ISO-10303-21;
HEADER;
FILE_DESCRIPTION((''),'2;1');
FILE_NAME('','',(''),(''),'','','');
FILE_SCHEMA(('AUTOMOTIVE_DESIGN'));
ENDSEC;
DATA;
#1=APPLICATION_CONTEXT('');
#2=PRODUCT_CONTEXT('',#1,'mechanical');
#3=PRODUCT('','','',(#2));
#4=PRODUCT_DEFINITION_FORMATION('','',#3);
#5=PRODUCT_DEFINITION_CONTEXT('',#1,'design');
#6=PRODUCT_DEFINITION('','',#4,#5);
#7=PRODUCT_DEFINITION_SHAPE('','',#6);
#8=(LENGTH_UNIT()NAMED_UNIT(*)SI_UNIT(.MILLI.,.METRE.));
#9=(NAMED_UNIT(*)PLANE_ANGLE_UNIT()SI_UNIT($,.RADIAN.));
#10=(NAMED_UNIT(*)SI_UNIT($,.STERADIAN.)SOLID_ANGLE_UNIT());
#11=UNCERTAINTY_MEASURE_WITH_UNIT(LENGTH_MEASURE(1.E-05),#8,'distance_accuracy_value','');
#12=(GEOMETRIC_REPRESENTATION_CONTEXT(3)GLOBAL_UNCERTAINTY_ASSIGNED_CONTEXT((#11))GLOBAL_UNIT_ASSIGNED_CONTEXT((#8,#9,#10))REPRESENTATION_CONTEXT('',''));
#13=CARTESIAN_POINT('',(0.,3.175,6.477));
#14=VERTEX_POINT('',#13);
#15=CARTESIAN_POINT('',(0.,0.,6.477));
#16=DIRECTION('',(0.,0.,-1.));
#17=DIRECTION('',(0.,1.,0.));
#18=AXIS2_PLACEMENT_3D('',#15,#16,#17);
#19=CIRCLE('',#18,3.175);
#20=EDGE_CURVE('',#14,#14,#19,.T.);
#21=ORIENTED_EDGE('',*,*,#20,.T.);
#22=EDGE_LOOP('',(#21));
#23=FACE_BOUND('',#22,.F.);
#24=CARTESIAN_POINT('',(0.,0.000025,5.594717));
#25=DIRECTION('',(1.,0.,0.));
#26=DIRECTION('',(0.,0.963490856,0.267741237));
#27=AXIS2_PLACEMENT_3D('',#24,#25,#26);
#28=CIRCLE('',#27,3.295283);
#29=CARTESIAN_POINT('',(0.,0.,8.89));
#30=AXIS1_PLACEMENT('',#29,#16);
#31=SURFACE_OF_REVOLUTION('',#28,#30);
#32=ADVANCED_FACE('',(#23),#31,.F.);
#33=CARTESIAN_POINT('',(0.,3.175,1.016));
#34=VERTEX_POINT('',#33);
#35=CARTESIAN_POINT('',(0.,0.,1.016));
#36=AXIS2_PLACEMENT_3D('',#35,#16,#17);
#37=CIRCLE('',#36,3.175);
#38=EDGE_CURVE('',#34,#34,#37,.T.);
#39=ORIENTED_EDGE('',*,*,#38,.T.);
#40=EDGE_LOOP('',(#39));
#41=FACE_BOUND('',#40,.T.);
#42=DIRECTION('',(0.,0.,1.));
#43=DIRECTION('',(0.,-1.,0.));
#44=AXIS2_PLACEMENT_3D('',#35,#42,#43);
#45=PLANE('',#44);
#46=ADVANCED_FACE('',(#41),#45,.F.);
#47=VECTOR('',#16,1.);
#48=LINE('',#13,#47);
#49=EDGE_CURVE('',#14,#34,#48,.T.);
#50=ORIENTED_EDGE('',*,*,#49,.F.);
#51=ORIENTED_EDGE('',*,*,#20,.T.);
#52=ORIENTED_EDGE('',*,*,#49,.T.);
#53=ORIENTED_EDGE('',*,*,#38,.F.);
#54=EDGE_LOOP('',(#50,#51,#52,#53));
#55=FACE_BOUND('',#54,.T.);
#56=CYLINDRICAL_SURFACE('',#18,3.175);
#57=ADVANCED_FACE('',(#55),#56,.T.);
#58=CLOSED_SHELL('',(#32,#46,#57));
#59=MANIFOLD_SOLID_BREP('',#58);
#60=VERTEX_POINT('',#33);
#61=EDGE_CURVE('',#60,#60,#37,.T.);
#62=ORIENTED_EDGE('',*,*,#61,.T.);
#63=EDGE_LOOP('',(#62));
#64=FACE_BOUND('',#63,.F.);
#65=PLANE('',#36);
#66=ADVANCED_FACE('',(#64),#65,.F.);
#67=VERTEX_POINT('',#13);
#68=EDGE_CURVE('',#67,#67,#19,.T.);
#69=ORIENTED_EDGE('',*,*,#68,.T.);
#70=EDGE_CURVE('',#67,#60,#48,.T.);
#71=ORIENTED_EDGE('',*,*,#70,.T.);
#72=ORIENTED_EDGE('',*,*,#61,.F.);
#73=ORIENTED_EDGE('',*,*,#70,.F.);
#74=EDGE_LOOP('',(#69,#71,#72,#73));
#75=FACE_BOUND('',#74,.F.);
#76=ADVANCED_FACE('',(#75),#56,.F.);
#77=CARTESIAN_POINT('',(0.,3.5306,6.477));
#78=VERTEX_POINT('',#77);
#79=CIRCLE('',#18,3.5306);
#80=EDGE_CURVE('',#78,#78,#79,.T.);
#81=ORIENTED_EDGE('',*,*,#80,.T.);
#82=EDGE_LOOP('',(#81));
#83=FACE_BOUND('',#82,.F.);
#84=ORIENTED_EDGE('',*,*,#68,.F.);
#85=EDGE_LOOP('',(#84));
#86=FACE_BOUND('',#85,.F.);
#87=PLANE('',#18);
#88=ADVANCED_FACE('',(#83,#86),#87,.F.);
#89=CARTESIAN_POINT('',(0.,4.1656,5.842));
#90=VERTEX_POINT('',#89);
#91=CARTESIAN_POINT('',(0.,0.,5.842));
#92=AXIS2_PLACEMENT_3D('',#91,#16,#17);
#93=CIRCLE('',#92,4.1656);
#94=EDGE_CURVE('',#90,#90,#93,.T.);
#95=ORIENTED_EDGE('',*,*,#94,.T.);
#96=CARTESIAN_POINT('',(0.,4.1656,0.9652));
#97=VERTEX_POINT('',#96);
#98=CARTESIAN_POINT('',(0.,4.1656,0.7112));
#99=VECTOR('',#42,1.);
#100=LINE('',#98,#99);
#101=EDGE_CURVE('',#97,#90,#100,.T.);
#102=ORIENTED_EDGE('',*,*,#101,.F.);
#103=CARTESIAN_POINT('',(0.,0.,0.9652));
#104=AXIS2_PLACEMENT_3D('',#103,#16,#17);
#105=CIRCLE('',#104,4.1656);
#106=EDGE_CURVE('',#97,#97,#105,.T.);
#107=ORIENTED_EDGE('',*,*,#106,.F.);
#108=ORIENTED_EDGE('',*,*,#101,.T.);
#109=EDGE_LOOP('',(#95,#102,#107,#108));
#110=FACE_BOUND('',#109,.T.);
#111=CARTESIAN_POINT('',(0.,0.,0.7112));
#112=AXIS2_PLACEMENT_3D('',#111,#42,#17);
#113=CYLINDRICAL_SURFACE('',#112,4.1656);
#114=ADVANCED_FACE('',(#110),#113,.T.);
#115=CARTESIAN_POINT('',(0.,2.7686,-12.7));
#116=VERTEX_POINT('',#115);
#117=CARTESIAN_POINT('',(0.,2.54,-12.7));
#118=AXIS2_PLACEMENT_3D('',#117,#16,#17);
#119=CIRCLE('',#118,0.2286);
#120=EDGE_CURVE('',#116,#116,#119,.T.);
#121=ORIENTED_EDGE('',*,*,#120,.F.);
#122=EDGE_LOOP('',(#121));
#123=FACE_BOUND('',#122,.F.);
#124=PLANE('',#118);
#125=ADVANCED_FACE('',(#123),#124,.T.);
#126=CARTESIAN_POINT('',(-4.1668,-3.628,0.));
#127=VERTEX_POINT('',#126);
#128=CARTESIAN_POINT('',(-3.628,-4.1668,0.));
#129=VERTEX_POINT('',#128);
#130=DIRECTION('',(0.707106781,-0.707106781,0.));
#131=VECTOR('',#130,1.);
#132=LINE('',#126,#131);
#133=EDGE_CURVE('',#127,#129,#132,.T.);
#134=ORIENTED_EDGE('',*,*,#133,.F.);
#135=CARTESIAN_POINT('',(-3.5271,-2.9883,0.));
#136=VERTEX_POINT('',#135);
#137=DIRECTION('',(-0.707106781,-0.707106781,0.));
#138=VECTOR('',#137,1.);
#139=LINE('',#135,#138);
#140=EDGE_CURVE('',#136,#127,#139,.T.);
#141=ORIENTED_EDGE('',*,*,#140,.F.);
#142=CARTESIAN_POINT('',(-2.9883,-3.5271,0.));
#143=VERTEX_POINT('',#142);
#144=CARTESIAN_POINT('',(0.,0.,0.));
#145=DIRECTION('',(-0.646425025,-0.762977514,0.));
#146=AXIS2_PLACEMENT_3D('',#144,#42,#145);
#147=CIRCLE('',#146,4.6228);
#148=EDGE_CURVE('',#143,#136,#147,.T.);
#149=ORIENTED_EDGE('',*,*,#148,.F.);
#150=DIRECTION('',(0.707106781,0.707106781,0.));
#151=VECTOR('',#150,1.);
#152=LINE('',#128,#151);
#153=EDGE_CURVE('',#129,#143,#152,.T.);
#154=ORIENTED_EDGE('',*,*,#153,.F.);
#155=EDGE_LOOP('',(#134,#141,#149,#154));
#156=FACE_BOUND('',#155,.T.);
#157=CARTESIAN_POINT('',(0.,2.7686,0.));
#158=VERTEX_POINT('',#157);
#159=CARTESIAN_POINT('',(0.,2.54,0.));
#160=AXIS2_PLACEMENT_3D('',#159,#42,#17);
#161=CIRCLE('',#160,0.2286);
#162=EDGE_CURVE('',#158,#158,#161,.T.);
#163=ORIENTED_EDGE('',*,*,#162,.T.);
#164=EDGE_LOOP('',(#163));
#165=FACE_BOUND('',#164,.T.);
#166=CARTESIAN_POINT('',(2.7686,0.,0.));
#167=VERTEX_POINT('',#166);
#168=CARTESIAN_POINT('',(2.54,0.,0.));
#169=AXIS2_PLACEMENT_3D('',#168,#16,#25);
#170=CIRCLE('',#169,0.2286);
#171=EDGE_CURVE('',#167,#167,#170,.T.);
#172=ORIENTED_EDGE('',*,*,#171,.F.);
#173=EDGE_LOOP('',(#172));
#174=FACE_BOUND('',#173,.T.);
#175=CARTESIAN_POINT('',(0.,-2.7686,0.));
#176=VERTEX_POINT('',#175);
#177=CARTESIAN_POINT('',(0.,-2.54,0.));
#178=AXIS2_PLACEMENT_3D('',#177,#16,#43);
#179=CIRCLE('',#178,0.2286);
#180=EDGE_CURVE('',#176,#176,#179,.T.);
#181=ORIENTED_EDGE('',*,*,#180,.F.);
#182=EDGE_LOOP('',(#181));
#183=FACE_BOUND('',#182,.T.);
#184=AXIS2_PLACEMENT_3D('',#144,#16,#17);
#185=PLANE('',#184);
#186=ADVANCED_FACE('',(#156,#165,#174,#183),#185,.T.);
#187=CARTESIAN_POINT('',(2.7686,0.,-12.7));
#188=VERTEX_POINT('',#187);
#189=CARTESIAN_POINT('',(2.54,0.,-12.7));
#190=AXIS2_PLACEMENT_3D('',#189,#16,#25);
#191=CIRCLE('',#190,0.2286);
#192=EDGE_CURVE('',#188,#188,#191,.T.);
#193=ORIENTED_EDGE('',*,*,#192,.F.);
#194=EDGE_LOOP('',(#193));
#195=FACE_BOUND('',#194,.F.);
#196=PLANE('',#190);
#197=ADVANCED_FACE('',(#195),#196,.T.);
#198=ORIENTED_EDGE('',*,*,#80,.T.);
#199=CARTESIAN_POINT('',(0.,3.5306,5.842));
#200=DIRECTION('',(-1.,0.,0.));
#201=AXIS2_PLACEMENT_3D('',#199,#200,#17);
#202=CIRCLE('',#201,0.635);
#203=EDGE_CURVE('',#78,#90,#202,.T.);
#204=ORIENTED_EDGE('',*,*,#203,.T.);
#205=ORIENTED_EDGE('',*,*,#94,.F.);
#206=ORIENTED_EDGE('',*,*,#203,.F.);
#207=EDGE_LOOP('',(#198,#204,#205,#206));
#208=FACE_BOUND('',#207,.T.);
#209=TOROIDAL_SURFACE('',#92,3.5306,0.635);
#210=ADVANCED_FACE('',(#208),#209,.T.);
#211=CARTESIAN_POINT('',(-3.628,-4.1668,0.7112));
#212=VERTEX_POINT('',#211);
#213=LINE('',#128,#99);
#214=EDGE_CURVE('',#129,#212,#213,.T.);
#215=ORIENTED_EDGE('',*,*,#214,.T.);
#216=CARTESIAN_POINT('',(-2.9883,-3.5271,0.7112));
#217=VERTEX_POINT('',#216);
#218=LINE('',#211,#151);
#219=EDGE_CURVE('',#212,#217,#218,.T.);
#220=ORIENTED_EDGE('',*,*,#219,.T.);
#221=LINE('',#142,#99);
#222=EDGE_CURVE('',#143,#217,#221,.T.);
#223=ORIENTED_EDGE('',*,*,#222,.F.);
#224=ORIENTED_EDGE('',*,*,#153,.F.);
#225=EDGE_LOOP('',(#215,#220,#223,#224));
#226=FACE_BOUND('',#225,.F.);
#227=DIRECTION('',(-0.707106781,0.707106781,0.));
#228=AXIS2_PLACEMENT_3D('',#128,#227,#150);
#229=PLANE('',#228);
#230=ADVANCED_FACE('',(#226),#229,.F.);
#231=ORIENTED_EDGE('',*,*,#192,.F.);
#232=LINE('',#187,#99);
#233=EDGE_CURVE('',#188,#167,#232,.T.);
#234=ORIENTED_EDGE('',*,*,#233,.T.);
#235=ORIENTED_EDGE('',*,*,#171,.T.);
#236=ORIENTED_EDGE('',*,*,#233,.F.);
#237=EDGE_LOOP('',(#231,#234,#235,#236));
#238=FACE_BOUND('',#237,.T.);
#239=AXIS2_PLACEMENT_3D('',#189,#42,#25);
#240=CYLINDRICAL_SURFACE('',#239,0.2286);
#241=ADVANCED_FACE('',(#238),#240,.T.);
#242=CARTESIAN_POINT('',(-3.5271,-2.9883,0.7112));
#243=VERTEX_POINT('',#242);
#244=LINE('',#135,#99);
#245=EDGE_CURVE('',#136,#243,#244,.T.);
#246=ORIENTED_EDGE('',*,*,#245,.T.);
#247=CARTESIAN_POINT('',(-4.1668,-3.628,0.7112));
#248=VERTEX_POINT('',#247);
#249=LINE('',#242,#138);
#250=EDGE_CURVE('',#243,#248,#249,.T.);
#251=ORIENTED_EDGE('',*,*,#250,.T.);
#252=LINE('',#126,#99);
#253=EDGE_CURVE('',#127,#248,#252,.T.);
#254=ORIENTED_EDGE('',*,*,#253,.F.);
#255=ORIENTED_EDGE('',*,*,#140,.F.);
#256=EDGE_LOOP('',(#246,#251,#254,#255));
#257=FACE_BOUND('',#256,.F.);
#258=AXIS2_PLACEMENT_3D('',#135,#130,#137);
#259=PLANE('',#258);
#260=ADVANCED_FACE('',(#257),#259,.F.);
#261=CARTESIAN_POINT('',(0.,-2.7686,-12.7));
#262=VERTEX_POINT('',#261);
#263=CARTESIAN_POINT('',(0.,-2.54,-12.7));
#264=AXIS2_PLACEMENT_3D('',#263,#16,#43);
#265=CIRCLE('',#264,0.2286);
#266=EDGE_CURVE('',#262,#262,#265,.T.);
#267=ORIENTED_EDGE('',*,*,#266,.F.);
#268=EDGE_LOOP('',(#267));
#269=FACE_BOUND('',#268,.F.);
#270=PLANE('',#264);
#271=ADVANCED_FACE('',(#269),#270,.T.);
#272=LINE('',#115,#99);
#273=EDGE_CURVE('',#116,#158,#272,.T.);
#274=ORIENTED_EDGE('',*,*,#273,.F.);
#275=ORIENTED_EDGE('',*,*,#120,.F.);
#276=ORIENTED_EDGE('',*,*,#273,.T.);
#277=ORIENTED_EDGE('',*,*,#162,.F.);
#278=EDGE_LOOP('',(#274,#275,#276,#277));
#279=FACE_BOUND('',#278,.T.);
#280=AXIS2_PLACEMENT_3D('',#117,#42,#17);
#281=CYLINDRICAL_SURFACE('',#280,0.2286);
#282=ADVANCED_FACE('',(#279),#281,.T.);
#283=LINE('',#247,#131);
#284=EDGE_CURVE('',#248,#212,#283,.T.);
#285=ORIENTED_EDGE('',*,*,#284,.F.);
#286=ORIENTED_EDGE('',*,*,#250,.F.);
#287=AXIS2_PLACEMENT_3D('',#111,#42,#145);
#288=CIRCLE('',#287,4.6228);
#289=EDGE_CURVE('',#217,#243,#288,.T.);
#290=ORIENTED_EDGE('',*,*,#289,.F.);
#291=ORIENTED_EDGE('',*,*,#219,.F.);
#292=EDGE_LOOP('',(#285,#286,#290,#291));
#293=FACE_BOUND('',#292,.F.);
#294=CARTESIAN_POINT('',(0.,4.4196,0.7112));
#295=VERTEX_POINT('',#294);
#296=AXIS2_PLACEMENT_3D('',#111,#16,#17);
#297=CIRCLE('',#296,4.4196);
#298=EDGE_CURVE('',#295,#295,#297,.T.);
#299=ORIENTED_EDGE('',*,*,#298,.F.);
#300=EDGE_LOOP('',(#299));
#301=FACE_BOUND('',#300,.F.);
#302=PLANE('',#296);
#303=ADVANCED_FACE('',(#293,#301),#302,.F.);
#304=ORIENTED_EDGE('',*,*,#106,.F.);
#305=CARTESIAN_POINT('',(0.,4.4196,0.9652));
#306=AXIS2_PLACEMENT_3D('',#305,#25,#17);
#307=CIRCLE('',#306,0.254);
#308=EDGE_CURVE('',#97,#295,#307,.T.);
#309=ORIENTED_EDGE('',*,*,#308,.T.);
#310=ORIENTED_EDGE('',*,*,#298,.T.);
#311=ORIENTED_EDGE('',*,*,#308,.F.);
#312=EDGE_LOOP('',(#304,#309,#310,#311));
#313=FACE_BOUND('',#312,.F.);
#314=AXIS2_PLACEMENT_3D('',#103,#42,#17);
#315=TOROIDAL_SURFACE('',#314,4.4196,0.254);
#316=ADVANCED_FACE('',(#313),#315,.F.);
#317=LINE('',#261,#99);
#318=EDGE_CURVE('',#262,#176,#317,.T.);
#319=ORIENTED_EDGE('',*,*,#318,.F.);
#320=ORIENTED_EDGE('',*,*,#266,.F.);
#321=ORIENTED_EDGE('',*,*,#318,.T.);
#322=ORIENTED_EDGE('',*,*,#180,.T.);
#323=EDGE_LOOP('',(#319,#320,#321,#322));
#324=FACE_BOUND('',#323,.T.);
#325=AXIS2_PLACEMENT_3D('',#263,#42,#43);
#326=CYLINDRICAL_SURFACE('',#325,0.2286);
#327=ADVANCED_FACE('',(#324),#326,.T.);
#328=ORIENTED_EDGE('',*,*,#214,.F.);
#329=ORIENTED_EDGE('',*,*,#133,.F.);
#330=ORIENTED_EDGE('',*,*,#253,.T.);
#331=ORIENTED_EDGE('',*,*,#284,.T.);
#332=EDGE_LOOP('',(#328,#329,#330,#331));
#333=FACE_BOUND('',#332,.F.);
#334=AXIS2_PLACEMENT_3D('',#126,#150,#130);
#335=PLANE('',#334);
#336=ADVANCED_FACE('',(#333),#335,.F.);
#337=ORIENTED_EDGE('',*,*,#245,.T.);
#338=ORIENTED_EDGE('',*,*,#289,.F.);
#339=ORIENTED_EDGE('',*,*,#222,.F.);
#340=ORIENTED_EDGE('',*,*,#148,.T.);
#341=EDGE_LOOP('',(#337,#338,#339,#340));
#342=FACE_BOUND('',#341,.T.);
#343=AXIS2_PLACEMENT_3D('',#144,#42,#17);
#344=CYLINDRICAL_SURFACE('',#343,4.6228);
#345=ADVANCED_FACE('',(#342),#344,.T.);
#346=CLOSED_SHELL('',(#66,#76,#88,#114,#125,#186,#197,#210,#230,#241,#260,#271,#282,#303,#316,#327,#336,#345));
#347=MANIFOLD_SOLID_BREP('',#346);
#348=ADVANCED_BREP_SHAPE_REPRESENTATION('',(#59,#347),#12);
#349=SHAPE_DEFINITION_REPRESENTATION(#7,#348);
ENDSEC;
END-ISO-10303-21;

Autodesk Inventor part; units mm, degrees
ref_plane "YZ Plane" through (0, 0, 0) normal (1, 0, 0) x (0, 1, 0)
ref_plane "XZ Plane" through (0, 0, 0) normal (0, 1, 0) x (-1, 0, 0)
ref_plane "XY Plane" through (0, 0, 0) normal (0, 0, 1) x (1, 0, 0)
sketch "Sketch1" plane through (0, 0, 0) normal (1, 0, 0) x (0, 1, 0)
  line L0 (0, 13.8497) -> (0, -17.125) projected
  line L1 (-0.9246, 0) -> (5.5474, 0) construction
  line L2 (4.6228, 0) -> (4.6228, 0.7112)
  line L3 (4.6228, 0.7112) -> (4.1656, 0.7112)
  line L4 (4.1656, 0.7112) -> (4.1656, 6.477)
  line L5 (4.1656, 6.477) -> (3.175, 6.477)
  arc A0 (3.175, 6.477) -> (0, 8.89) centre (0, 5.5947) ccw
  line L6 (4.6228, 0) -> (0, 0)
  line L7 (2.9972, 0) -> (2.54, 0)
  line L8 (2.54, 0) -> (2.54, -12.7)
  line L9 (2.54, -12.7) -> (2.7686, -12.7)
  line L10 (2.7686, -12.7) -> (2.7686, 0)
  line L11 (3.175, 6.477) -> (3.175, 1.016)
  line L12 (3.175, 1.016) -> (0, 1.016)
  point P0 (0, 6.477)
  dimension "d0" = 2.54
  dimension "d1" = 0.4572
  dimension "d2" = 12.7
  dimension "d3" = 0.7112
  dimension "d4" = 6.477
  dimension "d5" = 9.2456
  dimension "d6" = 8.3312
  dimension "d7" = 6.35
  dimension "d8" = 2.413
  dimension "d23" = 1.016
sketch "Sketch2" plane through (0, 0, 0) normal (0, 0, 1) x (1, 0, 0)
  line L0 (0, 6.4772) -> (0, -6.5034) construction
  line L1 (-6.5034, 0) -> (6.4772, 0) construction
  circle A0 centre (0, 0) radius 4.6228 construction
  line L2 (0, 0) -> (-4.6491, -4.6491) construction
  line L3 (-3.5271, -2.9883) -> (-4.1668, -3.628)
  line L4 (-4.1668, -3.628) -> (-3.628, -4.1668)
  line L5 (-3.628, -4.1668) -> (-2.9883, -3.5271)
  arc A1 (-3.5271, -2.9883) -> (-2.9883, -3.5271) centre (0, 0) ccw
  dimension "d9" = 9.2456
  dimension "d10" = 0.762
  dimension "d11" = 0.889
  dimension "d12" = 45
revolve "Revolution1" add sketch "Sketch1" angle 360 about axis through (0, 0, 0) along (0, 0, -1) contours L12 L11 L5 L4 L3 L2 L6 L0
revolve "Revolution2" add sketch "Sketch1" angle 360 about axis through (0, 2.54, 0) along (0, 0, -1) contours L6 L10 L9 L8
extrude "Extrusion1" add sketch "Sketch2" along normal up to surface (0.7112 mm away) from surface at 0
pattern_circular "Circular Pattern1" count 3 over 180 about axis through (0, 0, -10) along (0, 0, -1) of "Revolution2"
fillet "Fillet1" radius 0.635 1 edges at (0, -4.1656, 6.477)
fillet "Fillet1" radius 0.254 1 edges at (0, -4.1656, 0.7112)
revolve "Revolution3" add sketch "Sketch1" angle 360 about axis through (0, 0, 0) along (0, 0, -1) separate body contours A0 L11 L12 L0
equation "\"d9\" = d5"
properties part number "OD-110L" material "ALUMINUM, 6061-T651"
